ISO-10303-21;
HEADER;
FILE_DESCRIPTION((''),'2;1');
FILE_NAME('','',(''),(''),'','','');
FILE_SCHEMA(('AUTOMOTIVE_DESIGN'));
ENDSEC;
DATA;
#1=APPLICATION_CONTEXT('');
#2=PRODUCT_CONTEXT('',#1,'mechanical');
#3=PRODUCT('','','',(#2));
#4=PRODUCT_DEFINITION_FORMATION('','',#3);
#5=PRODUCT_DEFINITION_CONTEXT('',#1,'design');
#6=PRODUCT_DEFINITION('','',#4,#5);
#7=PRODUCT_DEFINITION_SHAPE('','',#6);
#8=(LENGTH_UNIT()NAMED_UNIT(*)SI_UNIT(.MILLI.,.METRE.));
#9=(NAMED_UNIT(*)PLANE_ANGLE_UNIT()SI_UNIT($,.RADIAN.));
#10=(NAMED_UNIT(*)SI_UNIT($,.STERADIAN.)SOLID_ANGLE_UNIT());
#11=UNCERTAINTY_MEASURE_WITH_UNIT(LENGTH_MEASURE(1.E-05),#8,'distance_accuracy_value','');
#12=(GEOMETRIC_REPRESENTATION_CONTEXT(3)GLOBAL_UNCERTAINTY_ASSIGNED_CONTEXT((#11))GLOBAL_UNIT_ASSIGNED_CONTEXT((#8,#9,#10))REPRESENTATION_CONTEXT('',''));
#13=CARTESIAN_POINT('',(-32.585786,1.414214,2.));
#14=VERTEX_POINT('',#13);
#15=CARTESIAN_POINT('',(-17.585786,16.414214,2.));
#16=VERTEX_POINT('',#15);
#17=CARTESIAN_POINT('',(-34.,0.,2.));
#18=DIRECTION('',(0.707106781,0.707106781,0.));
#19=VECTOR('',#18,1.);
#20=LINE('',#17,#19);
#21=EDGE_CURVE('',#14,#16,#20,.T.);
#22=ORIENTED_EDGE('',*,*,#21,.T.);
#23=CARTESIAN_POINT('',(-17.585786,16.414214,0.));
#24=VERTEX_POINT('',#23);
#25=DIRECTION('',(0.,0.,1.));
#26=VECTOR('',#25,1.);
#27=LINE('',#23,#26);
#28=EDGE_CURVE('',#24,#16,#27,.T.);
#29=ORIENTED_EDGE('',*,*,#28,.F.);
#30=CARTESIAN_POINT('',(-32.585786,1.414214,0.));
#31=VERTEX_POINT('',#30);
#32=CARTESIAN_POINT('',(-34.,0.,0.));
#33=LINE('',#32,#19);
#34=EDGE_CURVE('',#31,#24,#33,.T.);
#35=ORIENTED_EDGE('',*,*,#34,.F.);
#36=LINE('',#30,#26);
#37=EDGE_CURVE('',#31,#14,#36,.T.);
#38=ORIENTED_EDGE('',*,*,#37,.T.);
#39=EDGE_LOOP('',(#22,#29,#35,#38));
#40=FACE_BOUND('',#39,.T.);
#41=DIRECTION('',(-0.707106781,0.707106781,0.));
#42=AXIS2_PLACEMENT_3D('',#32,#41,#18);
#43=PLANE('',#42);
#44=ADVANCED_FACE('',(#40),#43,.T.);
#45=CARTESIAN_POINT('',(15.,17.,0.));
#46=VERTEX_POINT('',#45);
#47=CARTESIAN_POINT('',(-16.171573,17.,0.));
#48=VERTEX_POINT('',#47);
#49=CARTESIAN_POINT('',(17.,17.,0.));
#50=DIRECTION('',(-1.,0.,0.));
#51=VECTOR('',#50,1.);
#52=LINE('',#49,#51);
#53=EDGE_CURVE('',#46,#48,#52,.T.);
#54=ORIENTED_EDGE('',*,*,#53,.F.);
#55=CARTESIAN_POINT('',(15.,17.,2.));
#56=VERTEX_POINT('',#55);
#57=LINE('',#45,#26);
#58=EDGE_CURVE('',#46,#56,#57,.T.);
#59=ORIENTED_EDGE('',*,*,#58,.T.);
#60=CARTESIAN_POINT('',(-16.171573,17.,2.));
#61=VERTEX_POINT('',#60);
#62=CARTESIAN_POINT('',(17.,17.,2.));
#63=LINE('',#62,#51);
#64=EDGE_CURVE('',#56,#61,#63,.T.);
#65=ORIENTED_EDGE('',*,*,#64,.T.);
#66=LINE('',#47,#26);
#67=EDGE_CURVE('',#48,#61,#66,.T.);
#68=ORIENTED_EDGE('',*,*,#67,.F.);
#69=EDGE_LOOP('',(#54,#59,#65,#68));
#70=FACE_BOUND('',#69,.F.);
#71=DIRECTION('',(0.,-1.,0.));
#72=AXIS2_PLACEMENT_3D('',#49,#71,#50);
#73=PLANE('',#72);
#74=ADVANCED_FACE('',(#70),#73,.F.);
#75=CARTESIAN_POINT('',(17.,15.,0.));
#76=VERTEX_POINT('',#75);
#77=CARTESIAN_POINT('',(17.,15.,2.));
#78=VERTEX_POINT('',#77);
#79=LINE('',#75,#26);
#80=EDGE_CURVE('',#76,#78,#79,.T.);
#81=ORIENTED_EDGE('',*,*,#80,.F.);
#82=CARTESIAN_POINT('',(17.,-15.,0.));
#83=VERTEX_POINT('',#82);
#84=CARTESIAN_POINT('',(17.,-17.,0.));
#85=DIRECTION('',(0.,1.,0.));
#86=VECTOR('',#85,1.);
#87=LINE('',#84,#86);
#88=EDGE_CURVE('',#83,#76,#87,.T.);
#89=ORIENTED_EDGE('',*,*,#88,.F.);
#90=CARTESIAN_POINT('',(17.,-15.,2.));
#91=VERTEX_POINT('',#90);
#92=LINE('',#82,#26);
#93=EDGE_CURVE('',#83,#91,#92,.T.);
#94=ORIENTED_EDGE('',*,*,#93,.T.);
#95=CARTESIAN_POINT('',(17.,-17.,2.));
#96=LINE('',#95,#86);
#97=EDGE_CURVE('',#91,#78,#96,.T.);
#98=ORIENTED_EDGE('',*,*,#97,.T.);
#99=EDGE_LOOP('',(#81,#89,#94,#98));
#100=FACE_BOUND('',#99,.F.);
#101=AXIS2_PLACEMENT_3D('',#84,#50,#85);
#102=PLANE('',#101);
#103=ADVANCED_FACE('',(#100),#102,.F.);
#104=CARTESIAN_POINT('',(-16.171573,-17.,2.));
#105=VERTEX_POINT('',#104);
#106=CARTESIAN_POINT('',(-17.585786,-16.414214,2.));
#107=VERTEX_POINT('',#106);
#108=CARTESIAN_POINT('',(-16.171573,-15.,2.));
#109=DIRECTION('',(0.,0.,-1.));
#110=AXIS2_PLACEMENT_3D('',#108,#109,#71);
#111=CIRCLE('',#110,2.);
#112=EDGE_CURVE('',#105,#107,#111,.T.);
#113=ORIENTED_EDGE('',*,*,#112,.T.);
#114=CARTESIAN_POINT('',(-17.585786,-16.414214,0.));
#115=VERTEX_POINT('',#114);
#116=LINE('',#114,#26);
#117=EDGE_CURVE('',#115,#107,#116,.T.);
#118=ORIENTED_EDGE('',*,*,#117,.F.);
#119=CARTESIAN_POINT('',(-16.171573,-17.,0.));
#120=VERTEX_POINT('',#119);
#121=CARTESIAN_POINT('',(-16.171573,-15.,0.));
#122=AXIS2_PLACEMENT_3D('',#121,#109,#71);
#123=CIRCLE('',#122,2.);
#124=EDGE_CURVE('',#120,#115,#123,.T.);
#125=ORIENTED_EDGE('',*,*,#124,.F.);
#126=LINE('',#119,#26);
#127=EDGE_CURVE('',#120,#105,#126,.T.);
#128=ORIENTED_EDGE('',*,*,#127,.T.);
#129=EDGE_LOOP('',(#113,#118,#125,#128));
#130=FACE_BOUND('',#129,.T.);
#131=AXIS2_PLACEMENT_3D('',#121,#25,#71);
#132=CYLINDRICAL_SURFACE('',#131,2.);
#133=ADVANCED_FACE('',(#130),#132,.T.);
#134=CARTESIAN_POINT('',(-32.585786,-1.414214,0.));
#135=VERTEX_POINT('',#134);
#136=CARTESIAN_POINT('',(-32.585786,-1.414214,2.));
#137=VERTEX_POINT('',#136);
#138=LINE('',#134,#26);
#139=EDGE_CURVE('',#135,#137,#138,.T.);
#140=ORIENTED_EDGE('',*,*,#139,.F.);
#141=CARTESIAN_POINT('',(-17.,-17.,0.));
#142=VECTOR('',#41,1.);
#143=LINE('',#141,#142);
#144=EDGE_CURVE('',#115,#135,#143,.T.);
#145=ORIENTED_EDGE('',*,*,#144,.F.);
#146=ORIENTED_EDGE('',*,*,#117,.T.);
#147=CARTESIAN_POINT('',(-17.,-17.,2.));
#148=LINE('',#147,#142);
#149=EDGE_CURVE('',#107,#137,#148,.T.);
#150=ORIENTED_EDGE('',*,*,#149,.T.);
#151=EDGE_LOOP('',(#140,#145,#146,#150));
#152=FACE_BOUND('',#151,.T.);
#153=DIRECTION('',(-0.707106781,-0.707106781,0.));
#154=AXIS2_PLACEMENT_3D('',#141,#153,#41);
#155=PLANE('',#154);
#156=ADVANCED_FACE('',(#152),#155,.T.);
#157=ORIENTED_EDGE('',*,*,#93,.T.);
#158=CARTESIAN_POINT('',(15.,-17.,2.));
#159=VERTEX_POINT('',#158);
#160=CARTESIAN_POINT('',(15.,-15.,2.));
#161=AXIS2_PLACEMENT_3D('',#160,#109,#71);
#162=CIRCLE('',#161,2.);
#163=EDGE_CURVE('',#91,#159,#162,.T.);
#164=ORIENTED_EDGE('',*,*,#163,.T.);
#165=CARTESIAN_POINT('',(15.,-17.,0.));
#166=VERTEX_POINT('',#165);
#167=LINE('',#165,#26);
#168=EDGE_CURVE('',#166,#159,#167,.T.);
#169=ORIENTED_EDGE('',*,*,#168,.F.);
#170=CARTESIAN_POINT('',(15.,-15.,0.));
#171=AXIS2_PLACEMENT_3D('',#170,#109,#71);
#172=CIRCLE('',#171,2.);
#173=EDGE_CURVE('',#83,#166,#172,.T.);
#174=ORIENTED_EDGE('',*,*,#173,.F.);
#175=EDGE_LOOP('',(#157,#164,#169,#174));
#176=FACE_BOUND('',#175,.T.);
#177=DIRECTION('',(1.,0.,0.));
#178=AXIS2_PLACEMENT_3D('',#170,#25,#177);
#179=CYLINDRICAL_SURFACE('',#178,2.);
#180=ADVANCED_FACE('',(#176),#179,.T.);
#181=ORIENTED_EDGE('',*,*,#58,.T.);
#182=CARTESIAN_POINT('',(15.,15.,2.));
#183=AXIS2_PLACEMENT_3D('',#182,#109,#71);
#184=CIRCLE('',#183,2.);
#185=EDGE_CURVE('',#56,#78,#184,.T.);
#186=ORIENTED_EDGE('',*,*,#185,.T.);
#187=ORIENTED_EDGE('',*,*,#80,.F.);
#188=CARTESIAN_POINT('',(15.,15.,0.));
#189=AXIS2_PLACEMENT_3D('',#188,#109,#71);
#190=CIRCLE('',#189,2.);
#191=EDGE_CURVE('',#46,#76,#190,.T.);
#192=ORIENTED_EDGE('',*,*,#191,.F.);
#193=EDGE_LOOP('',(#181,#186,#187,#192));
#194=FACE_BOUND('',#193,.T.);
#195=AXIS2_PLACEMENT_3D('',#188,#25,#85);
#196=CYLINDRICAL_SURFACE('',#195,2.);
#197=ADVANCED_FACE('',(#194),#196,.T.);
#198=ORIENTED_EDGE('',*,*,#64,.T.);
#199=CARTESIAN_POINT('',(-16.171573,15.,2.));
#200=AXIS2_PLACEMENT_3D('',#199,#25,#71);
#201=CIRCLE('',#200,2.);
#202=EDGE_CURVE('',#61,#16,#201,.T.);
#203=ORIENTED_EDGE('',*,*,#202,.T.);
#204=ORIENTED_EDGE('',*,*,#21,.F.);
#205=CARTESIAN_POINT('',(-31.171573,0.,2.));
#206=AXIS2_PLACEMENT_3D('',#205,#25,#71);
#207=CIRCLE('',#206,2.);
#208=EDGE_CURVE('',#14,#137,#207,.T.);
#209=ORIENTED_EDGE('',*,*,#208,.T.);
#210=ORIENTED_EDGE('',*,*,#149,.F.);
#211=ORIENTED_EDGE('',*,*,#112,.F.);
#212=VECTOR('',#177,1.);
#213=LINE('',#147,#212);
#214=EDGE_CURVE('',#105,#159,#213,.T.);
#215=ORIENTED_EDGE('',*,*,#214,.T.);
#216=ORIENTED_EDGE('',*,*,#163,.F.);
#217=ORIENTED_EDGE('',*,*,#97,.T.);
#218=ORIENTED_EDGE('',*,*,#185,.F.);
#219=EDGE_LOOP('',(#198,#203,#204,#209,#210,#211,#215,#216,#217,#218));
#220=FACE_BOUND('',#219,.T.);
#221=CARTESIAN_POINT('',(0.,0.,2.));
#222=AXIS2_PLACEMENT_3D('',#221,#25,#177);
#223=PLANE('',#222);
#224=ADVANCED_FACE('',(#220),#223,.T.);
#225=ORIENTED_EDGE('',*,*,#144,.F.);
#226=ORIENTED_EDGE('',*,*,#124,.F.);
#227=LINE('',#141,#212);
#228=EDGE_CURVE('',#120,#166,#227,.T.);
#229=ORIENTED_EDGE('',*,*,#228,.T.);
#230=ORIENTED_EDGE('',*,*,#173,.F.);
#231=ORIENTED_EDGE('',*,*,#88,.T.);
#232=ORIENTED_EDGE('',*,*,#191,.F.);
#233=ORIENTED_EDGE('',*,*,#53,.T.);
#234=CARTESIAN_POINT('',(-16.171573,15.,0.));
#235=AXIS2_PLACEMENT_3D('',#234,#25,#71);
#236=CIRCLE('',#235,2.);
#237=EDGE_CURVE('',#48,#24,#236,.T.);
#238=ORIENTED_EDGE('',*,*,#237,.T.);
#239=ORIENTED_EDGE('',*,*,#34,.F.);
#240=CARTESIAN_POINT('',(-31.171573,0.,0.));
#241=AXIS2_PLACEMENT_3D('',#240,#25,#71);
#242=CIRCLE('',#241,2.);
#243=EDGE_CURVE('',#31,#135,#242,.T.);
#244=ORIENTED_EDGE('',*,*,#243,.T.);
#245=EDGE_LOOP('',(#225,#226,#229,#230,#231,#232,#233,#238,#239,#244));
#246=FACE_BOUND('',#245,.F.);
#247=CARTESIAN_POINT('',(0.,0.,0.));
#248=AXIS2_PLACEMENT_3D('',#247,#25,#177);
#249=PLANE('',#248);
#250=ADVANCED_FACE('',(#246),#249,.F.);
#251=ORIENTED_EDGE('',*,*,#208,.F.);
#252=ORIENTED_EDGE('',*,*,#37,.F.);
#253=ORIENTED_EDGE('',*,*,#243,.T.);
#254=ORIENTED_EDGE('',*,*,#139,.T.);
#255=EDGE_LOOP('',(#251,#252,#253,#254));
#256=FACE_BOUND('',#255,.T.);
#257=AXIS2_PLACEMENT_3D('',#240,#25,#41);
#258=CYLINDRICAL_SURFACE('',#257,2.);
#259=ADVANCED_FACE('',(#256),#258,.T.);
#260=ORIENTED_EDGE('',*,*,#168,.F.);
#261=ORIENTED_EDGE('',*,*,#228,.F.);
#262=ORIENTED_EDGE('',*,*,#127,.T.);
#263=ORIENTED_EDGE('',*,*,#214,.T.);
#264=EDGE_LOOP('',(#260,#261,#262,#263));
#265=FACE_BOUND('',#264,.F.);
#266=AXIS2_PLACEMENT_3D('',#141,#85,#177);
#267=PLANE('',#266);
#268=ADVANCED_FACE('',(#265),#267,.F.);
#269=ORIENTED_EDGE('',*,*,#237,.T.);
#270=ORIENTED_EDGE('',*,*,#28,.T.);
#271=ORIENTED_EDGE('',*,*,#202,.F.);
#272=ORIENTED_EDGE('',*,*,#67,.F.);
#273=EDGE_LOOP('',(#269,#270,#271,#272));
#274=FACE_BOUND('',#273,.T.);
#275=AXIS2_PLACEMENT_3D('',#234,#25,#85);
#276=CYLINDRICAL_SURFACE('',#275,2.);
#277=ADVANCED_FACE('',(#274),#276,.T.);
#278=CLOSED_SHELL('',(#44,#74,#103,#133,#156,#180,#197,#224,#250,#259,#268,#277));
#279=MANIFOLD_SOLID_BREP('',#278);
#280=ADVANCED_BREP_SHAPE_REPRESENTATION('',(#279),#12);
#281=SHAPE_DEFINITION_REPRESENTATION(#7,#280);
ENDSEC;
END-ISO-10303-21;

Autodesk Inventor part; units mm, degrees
ref_plane "YZ Plane" through (0, 0, 0) normal (1, 0, 0) x (0, 1, 0)
ref_plane "XZ Plane" through (0, 0, 0) normal (0, 1, 0) x (-1, 0, 0)
ref_plane "XY Plane" through (0, 0, 0) normal (0, 0, 1) x (1, 0, 0)
sketch "Sketch1" plane through (0, 0, 0) normal (0, 0, 1) x (1, 0, 0)
  line L0 (-17, -17) -> (17, -17)
  line L1 (17, -17) -> (17, 17)
  line L2 (17, 17) -> (-17, 17)
  line L3 (-17, 17) -> (-17, -17)
  line L4 (-17, -17) -> (17, 17) construction
  line L5 (17, -17) -> (-17, 17) construction
  line L6 (-17, -17) -> (-34, 0)
  line L7 (-34, 0) -> (-17, 17)
  point P0 (0, 0)
  point P1 (-17, 0)
  dimension "d154" = 34
  dimension "d155" = 34
  dimension "d180" = 17
extrude "Plate5" add sketch "Sketch1" along normal blind 2
fillet "Corner Round1" radius 2 5 edges at (17, 17, 1) (-17, 17, 1) (-17, -17, 1) (17, -17, 1) (-34, 0, 1)
properties part number "PRS 1200-52-03 FDS 1000 CUP 1" material "Stainless Steel"
